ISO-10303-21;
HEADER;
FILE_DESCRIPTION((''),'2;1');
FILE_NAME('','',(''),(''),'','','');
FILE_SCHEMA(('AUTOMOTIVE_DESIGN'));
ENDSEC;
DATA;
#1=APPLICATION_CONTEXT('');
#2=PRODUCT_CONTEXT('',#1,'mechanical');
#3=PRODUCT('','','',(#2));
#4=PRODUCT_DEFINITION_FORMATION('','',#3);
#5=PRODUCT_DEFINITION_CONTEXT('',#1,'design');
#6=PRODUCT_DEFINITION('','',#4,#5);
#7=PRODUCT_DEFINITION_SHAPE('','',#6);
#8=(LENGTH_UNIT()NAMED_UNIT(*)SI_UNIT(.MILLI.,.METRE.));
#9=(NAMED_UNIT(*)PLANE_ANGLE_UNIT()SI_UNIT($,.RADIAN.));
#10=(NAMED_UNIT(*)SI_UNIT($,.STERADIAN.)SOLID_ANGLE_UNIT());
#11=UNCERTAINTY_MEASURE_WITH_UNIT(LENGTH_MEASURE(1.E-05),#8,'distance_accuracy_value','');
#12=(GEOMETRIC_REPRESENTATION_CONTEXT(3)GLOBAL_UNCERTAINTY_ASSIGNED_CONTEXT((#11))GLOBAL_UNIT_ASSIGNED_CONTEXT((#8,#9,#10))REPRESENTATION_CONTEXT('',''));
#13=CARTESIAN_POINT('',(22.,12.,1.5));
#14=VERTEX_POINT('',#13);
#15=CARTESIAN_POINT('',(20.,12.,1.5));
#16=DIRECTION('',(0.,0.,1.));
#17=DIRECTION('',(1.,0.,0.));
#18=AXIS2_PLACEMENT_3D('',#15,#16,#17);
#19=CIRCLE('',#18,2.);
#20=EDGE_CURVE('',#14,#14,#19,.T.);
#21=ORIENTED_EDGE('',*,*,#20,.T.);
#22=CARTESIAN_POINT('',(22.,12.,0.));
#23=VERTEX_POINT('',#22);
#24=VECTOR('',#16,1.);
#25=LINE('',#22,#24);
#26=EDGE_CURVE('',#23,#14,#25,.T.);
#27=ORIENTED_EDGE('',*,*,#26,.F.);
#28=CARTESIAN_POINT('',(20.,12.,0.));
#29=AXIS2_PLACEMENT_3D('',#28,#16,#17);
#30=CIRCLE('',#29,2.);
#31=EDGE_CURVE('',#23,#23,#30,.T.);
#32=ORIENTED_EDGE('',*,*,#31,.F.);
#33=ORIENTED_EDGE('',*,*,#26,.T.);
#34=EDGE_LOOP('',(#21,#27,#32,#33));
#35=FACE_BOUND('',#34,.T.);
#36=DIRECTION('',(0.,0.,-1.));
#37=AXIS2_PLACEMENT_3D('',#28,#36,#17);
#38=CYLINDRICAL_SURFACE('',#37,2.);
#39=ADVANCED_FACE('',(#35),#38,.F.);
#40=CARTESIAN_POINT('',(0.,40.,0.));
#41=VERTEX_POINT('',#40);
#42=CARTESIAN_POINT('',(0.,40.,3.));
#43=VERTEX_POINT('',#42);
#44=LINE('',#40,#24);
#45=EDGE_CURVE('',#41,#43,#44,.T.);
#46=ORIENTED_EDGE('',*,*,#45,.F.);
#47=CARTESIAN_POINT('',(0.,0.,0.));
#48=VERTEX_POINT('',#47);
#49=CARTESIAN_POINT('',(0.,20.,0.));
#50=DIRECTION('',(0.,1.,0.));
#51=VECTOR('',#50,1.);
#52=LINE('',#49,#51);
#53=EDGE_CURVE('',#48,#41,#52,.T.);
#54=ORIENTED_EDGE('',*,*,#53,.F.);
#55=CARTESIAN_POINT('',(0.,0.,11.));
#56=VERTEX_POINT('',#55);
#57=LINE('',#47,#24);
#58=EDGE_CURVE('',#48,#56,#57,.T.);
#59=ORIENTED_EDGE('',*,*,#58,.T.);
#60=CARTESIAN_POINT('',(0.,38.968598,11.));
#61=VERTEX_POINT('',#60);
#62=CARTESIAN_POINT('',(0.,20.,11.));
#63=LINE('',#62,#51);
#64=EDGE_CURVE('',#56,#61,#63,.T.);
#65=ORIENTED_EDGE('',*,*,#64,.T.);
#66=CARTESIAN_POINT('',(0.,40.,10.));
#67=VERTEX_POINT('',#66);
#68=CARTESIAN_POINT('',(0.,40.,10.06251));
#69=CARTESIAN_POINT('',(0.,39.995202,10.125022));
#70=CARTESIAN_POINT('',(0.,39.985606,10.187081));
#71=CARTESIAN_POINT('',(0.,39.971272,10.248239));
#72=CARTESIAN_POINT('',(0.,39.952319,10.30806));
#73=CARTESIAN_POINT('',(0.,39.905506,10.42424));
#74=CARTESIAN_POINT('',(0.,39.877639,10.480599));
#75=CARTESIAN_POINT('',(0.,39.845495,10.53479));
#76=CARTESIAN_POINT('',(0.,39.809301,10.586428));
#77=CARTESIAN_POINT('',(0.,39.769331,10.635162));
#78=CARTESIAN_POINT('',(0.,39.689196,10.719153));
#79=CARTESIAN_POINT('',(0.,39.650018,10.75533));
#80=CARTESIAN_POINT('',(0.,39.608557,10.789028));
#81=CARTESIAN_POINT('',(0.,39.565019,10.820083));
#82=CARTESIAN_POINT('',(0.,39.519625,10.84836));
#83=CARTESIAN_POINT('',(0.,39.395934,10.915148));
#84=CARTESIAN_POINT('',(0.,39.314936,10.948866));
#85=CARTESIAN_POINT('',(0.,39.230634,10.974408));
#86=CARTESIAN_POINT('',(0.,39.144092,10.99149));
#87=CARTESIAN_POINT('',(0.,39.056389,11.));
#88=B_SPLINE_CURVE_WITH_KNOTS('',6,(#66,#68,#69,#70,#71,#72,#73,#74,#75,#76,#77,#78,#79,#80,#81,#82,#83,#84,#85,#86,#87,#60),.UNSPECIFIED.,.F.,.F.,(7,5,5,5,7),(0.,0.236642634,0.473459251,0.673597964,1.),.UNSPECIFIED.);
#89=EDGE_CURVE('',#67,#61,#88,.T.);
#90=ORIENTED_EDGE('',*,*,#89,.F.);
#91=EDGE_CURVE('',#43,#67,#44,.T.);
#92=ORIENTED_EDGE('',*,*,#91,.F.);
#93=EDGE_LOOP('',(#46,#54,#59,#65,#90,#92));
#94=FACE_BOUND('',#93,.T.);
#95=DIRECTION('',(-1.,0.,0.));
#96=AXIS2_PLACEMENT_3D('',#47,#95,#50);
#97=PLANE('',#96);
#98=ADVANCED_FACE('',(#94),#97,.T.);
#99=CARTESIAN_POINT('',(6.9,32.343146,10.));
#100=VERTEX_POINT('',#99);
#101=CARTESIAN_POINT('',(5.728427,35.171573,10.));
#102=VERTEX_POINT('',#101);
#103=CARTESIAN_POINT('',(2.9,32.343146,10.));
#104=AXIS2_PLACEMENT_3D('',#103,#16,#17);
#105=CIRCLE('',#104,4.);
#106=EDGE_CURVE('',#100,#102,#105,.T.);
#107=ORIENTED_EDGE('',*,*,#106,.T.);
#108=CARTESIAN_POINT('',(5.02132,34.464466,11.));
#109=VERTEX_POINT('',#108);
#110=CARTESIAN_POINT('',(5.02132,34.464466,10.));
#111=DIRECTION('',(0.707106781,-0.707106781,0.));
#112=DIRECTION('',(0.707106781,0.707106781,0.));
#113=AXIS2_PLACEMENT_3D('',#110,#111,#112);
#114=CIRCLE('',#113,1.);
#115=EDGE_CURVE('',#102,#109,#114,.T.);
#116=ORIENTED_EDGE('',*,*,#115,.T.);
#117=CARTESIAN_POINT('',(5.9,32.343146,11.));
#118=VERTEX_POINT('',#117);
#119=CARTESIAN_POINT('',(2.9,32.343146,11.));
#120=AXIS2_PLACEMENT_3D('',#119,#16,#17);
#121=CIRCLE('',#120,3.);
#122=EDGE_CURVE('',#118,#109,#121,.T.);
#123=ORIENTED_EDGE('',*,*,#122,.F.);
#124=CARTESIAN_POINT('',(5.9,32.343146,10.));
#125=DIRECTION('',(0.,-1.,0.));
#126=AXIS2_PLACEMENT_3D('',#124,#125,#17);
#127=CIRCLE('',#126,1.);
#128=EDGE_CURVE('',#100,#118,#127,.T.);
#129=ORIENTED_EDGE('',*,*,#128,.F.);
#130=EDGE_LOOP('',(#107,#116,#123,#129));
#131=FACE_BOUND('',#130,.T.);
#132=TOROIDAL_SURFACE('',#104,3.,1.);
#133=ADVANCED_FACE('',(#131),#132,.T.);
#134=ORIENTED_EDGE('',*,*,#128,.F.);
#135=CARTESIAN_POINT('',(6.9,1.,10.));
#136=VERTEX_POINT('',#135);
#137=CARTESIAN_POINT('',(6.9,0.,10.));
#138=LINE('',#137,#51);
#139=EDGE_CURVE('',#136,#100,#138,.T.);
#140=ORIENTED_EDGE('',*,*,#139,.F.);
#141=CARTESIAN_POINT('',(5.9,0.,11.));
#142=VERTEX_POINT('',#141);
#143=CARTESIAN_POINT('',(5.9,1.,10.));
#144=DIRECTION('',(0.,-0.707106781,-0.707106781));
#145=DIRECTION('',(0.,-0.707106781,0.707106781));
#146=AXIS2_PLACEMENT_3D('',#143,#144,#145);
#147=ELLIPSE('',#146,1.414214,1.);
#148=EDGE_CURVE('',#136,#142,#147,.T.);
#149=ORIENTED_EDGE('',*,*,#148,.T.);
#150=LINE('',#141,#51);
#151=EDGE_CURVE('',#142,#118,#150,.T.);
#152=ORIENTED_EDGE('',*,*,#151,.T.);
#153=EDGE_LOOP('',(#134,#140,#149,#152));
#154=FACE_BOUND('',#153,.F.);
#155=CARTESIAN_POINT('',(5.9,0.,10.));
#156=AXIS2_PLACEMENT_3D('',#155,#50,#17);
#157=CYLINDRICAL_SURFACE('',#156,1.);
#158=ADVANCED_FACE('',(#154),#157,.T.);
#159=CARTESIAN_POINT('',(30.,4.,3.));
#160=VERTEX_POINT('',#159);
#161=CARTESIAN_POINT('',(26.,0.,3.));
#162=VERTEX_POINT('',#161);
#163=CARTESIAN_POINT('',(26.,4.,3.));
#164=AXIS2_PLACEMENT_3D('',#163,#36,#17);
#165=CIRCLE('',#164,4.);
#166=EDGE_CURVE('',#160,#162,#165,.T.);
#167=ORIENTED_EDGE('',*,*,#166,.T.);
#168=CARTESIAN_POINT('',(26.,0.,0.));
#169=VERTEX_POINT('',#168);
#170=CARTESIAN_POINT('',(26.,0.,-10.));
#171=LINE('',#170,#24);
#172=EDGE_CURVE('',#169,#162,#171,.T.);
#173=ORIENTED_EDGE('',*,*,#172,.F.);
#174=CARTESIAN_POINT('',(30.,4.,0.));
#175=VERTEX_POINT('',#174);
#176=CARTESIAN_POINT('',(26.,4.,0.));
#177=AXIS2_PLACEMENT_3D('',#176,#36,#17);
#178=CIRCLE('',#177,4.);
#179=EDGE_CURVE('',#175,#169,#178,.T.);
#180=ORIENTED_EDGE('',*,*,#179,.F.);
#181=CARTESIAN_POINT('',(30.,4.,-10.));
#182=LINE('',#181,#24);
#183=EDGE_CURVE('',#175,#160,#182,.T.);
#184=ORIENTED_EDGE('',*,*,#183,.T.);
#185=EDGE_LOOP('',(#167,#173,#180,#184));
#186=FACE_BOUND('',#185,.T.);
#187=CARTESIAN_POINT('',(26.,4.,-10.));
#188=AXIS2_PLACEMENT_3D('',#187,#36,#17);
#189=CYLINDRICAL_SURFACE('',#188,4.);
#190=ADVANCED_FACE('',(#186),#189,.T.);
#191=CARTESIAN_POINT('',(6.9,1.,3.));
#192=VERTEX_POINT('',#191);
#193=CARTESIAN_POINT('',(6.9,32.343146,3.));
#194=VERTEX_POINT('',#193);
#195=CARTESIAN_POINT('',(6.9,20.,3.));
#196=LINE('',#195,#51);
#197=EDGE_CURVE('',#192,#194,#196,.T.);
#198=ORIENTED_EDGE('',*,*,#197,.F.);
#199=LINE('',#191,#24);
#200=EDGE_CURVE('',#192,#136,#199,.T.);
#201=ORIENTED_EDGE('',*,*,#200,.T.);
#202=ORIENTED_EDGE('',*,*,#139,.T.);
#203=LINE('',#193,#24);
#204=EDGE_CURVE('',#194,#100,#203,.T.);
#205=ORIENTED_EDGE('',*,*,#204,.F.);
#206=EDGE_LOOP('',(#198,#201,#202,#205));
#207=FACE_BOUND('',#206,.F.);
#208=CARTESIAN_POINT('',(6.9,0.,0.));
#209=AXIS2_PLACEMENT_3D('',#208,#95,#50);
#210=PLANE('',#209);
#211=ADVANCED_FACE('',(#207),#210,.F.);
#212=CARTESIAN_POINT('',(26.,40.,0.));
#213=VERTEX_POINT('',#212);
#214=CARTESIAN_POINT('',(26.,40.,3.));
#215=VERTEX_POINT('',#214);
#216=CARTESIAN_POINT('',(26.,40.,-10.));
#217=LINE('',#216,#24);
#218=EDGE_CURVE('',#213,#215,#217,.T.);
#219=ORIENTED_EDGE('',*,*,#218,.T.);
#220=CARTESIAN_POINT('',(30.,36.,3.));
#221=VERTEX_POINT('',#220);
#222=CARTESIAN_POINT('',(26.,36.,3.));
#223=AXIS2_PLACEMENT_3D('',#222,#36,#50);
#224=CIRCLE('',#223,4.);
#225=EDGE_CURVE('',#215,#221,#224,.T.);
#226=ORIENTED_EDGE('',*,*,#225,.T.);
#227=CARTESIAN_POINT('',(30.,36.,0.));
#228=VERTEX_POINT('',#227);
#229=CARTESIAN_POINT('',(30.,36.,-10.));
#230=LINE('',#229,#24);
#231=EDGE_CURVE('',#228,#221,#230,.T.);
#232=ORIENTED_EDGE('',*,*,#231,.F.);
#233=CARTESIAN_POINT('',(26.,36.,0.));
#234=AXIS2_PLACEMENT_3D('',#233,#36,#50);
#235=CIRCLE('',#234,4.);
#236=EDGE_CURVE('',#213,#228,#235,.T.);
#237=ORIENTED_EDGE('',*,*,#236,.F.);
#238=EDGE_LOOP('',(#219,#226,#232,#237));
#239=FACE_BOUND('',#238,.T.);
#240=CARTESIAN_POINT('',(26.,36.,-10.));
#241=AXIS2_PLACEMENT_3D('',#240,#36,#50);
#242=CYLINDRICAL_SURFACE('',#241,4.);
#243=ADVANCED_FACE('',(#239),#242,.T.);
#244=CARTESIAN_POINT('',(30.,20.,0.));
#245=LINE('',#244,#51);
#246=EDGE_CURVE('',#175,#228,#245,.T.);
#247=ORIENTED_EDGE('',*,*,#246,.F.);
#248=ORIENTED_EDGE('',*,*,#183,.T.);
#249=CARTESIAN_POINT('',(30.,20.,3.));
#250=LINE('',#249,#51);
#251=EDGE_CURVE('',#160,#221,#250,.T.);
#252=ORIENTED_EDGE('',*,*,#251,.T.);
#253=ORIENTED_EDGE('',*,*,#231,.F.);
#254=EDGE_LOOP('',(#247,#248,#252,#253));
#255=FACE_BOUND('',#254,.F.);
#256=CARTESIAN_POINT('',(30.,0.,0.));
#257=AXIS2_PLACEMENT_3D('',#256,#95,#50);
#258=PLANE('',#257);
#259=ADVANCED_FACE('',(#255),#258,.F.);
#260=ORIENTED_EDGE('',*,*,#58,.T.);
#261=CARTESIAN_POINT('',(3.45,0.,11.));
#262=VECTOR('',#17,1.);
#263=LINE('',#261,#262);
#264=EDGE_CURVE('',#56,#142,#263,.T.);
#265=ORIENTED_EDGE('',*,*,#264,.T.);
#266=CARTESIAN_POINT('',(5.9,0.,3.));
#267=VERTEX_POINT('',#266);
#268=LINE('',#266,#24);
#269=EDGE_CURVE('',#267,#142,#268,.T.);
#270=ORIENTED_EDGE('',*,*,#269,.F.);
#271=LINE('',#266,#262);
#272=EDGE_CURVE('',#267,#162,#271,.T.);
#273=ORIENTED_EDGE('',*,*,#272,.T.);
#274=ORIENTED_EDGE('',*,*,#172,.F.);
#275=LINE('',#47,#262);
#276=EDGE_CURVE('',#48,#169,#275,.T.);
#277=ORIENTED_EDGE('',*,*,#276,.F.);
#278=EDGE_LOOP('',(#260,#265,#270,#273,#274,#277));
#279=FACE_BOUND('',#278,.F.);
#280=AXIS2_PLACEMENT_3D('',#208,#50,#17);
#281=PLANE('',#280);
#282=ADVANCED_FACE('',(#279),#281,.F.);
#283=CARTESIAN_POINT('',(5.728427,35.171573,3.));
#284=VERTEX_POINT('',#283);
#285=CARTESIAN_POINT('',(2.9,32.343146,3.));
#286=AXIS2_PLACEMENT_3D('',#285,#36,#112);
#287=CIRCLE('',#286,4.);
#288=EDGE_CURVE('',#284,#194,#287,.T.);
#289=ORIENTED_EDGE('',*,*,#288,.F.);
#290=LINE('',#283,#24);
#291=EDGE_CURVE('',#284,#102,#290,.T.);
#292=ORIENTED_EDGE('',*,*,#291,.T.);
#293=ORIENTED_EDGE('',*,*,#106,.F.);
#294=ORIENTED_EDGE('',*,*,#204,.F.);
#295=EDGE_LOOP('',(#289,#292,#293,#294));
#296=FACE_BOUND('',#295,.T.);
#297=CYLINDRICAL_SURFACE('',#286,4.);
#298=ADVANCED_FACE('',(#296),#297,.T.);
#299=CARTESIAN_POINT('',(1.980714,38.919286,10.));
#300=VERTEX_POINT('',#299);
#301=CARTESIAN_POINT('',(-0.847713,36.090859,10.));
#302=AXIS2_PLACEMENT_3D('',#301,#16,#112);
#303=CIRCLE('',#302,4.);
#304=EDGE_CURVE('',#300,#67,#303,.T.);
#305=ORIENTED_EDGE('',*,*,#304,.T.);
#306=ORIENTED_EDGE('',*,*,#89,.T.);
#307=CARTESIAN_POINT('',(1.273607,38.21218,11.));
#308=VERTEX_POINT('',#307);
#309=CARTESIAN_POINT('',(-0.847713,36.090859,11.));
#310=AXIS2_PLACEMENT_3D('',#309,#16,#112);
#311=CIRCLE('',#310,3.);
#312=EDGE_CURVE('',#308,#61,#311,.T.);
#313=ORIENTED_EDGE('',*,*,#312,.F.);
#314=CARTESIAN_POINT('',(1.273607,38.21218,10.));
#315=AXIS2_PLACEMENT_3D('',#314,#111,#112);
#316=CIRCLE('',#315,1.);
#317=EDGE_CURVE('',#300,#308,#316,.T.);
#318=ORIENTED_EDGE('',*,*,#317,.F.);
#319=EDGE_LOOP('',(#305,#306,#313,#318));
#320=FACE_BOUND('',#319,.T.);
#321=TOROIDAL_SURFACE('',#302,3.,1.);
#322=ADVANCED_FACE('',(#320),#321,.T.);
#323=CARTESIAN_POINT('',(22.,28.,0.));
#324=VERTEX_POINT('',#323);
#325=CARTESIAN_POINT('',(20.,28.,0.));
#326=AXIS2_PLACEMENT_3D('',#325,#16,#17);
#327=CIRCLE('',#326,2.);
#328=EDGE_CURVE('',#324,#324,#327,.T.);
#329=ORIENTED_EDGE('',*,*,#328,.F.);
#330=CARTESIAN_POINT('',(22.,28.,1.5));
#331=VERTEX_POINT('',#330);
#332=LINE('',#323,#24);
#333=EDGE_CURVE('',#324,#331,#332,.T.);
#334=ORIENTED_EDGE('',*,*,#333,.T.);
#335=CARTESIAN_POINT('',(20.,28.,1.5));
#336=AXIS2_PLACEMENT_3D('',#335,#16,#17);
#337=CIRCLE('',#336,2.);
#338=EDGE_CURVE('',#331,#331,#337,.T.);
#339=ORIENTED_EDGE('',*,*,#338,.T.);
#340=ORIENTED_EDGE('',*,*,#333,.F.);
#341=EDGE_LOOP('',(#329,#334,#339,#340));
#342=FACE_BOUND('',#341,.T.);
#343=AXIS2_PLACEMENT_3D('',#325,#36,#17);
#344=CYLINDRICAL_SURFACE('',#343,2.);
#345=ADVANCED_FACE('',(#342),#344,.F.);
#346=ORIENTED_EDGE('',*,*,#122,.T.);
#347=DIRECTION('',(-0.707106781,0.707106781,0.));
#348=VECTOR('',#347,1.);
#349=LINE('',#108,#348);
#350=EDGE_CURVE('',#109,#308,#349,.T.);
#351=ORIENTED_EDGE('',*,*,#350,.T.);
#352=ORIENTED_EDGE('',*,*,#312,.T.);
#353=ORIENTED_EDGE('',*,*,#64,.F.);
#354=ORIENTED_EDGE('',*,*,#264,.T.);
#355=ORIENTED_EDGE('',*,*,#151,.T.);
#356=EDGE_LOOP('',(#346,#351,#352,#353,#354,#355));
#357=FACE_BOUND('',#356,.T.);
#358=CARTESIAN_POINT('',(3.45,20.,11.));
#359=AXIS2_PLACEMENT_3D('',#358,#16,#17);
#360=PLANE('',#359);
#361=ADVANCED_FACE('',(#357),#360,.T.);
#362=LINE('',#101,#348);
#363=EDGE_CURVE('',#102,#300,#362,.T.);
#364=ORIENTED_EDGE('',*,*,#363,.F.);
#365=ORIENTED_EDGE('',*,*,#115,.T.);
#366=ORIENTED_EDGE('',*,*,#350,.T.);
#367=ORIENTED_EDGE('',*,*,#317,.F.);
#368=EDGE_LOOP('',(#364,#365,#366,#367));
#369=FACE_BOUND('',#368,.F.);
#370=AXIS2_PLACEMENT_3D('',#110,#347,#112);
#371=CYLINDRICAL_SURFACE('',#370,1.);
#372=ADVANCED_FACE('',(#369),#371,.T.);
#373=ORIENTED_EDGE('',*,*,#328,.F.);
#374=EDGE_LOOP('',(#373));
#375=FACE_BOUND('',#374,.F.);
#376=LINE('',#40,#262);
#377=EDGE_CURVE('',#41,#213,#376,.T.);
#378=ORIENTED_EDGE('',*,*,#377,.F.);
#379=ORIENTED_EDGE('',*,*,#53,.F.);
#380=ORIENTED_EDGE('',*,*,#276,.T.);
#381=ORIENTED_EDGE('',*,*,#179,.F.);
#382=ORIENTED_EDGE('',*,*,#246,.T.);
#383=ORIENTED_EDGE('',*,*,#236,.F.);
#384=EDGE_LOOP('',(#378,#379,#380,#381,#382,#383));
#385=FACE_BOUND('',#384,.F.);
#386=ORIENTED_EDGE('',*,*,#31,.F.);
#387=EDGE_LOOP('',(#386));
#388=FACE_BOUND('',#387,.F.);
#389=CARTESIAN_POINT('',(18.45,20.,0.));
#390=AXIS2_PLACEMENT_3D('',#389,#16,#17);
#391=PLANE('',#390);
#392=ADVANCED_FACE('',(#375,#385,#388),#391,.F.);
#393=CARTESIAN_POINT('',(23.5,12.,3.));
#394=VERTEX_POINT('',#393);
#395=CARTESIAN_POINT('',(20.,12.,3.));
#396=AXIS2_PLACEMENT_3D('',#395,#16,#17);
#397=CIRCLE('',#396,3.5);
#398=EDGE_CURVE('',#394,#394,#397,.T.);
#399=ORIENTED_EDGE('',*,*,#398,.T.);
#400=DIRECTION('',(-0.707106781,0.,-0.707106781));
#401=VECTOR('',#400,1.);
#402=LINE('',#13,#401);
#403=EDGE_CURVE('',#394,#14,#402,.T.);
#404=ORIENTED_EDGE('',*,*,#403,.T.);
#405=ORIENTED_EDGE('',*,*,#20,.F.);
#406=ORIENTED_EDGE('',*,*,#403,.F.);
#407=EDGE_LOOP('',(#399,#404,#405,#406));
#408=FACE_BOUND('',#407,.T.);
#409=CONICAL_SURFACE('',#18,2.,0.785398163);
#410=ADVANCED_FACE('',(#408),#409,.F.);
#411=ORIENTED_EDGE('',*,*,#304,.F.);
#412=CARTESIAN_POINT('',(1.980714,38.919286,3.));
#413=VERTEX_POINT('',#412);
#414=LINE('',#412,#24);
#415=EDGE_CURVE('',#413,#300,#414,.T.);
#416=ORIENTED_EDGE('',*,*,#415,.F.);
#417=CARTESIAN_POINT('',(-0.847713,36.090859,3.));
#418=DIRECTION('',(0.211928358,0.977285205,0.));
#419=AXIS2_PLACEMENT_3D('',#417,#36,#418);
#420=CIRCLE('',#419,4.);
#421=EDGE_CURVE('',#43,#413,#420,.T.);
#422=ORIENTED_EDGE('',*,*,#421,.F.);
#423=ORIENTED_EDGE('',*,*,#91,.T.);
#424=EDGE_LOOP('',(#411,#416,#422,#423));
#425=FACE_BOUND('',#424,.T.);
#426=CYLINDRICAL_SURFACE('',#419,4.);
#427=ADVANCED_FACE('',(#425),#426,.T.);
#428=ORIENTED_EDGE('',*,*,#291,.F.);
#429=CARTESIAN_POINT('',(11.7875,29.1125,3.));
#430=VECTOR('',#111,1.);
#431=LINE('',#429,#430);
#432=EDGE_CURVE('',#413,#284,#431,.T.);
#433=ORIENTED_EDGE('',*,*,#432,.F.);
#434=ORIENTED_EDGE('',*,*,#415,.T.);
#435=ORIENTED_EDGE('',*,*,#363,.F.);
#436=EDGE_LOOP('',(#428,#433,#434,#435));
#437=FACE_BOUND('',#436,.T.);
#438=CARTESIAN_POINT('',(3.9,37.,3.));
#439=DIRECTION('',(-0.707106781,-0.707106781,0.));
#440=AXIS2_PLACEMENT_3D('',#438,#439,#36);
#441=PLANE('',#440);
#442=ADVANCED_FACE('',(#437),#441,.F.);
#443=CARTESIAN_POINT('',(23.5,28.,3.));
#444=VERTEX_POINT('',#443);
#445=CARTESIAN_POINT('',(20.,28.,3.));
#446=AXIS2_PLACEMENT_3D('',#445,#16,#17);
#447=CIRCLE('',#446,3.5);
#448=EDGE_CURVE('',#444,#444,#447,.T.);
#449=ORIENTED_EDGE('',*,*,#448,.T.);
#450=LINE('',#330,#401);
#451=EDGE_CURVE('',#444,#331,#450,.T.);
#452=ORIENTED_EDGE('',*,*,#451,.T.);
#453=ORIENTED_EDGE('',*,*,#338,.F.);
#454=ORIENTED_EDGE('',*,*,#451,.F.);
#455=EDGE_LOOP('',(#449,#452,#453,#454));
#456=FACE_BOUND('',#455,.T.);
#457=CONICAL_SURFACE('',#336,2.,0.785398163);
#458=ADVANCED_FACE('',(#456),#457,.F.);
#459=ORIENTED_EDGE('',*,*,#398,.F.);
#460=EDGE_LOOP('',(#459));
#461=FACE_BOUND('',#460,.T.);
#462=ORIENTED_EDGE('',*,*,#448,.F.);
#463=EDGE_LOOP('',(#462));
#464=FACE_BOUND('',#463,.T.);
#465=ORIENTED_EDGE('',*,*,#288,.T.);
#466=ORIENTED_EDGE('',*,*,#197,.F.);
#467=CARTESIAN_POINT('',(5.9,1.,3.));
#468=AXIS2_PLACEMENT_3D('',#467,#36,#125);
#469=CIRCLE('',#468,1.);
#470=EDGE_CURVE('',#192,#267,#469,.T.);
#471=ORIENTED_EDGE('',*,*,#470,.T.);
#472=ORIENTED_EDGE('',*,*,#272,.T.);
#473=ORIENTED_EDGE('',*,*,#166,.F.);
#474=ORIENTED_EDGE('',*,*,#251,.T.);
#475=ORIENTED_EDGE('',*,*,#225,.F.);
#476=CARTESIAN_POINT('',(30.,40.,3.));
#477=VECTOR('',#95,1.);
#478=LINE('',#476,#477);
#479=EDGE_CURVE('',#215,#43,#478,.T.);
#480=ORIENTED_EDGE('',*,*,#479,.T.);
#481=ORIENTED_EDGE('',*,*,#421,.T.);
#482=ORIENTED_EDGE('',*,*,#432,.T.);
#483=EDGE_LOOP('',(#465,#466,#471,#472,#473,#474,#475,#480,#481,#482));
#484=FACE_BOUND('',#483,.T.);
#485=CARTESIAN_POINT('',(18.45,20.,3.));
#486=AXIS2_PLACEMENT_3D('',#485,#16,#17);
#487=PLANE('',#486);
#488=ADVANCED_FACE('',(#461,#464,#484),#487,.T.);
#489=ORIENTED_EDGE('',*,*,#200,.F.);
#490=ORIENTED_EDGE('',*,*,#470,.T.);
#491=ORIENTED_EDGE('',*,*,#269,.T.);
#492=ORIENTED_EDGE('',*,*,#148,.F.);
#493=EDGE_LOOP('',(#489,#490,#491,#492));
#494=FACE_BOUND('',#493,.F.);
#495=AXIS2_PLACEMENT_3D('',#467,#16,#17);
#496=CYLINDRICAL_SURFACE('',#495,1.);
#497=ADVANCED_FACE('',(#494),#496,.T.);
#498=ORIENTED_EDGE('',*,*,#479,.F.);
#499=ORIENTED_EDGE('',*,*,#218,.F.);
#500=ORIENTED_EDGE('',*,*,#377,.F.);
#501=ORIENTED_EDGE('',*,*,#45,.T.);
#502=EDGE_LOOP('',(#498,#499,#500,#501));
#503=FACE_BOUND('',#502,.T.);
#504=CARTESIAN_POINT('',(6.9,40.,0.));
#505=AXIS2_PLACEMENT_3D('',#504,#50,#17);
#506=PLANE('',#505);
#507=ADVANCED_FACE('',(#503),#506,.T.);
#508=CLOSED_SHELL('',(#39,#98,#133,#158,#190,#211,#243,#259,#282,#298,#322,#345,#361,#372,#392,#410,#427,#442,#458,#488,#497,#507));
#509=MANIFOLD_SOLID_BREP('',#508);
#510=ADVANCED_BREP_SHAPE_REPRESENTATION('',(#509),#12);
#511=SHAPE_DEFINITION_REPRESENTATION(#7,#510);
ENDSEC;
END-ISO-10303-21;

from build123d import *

# Parameters (mm, degrees)
F0_W        = 6.9
F0_H        = 40
F1_DEPTH    = 11
F0_W_2      = 23.1
F0_R        = 2
F2_DEPTH    = 3
F3_SIZE     = 6
F4_T1_DEPTH = 11.8208999069
F4_T3_DEPTH = 12.1421356237
F4_T5_DEPTH = 23
F5_SIZE     = 1.5
F6_R        = 1


# Not quite as in the source:
# - a fillet or chamfer that OpenCascade refuses, or shapes differently, is made with other operations: its cross-section is extruded or revolved along the edge and cut away or added


with BuildPart() as f1:
    # F0 (on Top) → F1 (new body)
    with BuildSketch(Plane.XY):
        with Locations((3.45, 20)):
            Rectangle(F0_W, F0_H)
    extrude(amount=F1_DEPTH)

    # F0 (on Top) → F2 (join)
    with BuildSketch(Plane.XY):
        with Locations((18.45, 20)):
            Rectangle(F0_W_2, F0_H)
        with Locations((20, 12)):
            Circle(F0_R, mode=Mode.SUBTRACT)
        with Locations((20, 28)):
            Circle(F0_R, mode=Mode.SUBTRACT)
    extrude(amount=F2_DEPTH)

    # F3
    f3_edges = [f1.edges().sort_by_distance(p)[0] for p in [
        (6.9, 40, 7),
    ]]
    chamfer(f3_edges, length=F3_SIZE)

    # F4: fillet of radius 4 on 4 edges, made by hand

    # F4_s2 → F4_t1 (cut)
    with BuildSketch(Plane.XY.offset(3)):
        with BuildLine():
            ThreePointArc((0, 40), (1.0681383035, 39.602199685), (1.9807136938, 38.9192863062))
            Line((1.9807136938, 38.9192863062), (0.9, 40))
            Line((0.9, 40), (0, 40))
        make_face()
    extrude(amount=F4_T1_DEPTH, mode=Mode.SUBTRACT)

    # F4_s4 → F4_t3 (cut)
    with BuildSketch(Plane.XY.offset(3)):
        with BuildLine():
            ThreePointArc((5.7284271247, 35.1715728753), (6.59551813, 33.87387948), (6.9, 32.3431457505))
            Line((6.9, 32.3431457505), (6.9, 34))
            Line((6.9, 34), (5.7284271247, 35.1715728753))
        make_face()
    extrude(amount=F4_T3_DEPTH, mode=Mode.SUBTRACT)

    # F4_s6 → F4_t5 (cut)
    with BuildSketch(Plane.XY.offset(-10)):
        with BuildLine():
            ThreePointArc((26, 40), (28.8284271247, 38.8284271247), (30, 36))
            Line((30, 36), (30, 40))
            Line((30, 40), (26, 40))
        make_face()
        with BuildLine():
            ThreePointArc((30, 4), (28.8284271247, 1.1715728753), (26, 0))
            Line((26, 0), (30, 0))
            Line((30, 0), (30, 4))
        make_face()
    extrude(amount=F4_T5_DEPTH, mode=Mode.SUBTRACT)

    # F5
    f5_edges = [f1.edges().sort_by_distance(p)[0] for p in [
        (18, 28, 3),
        (18, 12, 3),
    ]]
    chamfer(f5_edges, length=F5_SIZE)

    # F6
    f6_edges = [f1.edges().sort_by_distance(p)[0] for p in [
        (6.9, 0, 7),
        (6.9, 16.171573, 11),
        (6.595518, 33.873879, 11),
        (3.85457, 37.04543, 11),
        (1.068138, 39.6022, 11),
    ]]
    fillet(f6_edges, radius=F6_R)


solid = f1.part
